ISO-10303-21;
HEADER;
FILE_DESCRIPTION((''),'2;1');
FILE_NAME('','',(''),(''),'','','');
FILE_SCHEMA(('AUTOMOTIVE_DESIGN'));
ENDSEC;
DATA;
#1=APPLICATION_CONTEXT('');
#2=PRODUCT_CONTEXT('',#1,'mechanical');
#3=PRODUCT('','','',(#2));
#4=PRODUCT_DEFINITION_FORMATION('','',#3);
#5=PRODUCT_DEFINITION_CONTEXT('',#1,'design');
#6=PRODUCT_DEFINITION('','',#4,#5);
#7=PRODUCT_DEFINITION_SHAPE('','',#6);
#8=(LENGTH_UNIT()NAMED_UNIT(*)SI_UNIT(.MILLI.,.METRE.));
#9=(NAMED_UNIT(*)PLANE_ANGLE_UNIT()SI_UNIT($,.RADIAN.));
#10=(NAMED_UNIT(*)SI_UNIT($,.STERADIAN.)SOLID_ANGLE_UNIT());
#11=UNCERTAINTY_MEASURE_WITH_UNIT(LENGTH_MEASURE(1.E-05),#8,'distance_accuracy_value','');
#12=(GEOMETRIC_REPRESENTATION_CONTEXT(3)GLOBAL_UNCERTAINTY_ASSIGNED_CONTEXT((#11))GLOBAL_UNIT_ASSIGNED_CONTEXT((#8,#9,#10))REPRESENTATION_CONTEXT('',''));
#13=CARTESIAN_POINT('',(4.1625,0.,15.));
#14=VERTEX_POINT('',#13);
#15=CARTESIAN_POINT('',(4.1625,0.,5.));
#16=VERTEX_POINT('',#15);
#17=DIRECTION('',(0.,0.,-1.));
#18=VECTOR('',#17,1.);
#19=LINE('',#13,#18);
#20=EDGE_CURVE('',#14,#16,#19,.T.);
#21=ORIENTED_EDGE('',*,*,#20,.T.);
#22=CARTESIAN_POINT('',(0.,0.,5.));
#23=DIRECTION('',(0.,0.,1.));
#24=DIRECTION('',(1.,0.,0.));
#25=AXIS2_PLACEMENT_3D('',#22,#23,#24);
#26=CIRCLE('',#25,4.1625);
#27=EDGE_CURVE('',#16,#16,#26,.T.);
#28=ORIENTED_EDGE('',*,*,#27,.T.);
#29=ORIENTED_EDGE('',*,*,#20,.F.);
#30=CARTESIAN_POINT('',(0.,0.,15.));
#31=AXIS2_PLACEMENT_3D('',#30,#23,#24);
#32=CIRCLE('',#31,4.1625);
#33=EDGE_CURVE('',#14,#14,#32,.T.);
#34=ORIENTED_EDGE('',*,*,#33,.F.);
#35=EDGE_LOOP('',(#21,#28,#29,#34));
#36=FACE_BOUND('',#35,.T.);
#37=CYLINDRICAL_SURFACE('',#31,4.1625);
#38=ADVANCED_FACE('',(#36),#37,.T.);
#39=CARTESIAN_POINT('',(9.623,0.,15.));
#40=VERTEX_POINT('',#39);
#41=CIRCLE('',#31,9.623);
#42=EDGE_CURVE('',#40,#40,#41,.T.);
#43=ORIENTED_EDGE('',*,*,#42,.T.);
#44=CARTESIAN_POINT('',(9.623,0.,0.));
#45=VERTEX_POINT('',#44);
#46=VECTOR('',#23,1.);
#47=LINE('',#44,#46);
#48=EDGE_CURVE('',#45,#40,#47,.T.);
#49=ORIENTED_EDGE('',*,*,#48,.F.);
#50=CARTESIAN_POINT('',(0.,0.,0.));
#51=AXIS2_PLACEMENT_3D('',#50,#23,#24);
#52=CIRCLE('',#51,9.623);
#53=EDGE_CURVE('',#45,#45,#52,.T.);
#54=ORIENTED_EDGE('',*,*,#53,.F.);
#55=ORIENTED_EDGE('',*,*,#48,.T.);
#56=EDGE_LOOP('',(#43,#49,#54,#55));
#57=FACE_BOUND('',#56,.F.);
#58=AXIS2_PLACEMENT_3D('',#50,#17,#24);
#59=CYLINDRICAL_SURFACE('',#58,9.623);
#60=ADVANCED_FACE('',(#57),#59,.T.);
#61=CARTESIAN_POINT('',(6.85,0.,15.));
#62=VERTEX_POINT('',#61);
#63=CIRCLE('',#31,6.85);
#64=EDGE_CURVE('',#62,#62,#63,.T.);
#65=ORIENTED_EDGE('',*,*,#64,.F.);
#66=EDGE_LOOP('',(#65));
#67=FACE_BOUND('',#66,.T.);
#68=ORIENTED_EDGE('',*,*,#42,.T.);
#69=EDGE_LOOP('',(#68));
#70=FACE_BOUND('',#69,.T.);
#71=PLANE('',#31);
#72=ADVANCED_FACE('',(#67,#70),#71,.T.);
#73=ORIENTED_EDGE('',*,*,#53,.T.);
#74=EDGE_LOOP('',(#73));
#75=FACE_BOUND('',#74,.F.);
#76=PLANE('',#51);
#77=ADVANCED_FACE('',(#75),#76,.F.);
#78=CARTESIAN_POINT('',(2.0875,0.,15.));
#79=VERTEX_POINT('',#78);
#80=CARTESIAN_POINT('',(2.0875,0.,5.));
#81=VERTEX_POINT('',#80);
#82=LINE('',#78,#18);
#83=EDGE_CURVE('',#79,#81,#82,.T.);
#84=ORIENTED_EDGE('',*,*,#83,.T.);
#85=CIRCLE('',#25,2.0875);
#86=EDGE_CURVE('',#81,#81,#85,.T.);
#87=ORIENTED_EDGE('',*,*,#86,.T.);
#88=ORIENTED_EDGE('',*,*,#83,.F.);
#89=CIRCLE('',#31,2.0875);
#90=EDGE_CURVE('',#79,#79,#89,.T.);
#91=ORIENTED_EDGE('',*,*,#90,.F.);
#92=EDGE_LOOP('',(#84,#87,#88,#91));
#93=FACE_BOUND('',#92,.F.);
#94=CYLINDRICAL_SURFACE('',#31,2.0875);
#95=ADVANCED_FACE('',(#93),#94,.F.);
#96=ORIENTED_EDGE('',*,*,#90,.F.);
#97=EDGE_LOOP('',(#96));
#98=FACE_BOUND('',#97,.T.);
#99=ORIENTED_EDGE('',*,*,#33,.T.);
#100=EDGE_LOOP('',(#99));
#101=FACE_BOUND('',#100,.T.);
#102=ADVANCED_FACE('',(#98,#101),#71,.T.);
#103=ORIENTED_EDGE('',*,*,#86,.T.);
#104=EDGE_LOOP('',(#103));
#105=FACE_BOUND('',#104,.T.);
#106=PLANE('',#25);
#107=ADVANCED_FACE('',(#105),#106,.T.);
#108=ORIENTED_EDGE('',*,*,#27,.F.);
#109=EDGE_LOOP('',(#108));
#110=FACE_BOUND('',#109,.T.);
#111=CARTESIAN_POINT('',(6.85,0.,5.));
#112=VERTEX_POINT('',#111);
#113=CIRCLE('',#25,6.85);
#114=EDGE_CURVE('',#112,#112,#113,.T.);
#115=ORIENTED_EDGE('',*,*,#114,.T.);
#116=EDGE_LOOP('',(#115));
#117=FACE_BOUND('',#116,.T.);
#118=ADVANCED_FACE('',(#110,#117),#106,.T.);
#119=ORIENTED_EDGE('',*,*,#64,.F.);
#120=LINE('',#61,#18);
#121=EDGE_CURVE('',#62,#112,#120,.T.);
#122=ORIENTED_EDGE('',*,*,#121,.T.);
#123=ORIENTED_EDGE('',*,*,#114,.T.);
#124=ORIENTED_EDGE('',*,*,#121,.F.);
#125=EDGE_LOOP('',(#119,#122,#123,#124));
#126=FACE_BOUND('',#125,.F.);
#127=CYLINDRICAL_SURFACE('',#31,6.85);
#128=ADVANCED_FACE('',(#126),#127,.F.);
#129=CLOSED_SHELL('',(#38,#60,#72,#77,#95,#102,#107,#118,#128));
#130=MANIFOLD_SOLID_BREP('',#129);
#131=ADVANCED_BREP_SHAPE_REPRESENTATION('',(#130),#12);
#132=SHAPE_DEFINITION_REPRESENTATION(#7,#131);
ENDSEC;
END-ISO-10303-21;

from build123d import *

# Parameters (mm, degrees)
F0_R     = 9.623
F1_DEPTH = 15
F2_R     = 2.0875
F3_DEPTH = 10
F2_R_2   = 6.85
F2_R_3   = 4.1625
F4_DEPTH = 10


# Not quite as in the source:
# - a feature names something its author has since deleted; it is built from what else it names


with BuildPart() as f1:
    # F0 (on Top) → F1 (new body)
    with BuildSketch(Plane.XY):
        Circle(F0_R)
    extrude(amount=F1_DEPTH)

    # F2 (on face) → F3 (cut)
    with BuildSketch(Plane.XY.offset(15)):
        Circle(F2_R)
    extrude(amount=-F3_DEPTH, mode=Mode.SUBTRACT)

    # F2 (on face) → F4 (cut)
    with BuildSketch(Plane.XY.offset(15)):
        Circle(F2_R_2)
        Circle(F2_R_3, mode=Mode.SUBTRACT)
    extrude(amount=-F4_DEPTH, mode=Mode.SUBTRACT)


solid = f1.part
